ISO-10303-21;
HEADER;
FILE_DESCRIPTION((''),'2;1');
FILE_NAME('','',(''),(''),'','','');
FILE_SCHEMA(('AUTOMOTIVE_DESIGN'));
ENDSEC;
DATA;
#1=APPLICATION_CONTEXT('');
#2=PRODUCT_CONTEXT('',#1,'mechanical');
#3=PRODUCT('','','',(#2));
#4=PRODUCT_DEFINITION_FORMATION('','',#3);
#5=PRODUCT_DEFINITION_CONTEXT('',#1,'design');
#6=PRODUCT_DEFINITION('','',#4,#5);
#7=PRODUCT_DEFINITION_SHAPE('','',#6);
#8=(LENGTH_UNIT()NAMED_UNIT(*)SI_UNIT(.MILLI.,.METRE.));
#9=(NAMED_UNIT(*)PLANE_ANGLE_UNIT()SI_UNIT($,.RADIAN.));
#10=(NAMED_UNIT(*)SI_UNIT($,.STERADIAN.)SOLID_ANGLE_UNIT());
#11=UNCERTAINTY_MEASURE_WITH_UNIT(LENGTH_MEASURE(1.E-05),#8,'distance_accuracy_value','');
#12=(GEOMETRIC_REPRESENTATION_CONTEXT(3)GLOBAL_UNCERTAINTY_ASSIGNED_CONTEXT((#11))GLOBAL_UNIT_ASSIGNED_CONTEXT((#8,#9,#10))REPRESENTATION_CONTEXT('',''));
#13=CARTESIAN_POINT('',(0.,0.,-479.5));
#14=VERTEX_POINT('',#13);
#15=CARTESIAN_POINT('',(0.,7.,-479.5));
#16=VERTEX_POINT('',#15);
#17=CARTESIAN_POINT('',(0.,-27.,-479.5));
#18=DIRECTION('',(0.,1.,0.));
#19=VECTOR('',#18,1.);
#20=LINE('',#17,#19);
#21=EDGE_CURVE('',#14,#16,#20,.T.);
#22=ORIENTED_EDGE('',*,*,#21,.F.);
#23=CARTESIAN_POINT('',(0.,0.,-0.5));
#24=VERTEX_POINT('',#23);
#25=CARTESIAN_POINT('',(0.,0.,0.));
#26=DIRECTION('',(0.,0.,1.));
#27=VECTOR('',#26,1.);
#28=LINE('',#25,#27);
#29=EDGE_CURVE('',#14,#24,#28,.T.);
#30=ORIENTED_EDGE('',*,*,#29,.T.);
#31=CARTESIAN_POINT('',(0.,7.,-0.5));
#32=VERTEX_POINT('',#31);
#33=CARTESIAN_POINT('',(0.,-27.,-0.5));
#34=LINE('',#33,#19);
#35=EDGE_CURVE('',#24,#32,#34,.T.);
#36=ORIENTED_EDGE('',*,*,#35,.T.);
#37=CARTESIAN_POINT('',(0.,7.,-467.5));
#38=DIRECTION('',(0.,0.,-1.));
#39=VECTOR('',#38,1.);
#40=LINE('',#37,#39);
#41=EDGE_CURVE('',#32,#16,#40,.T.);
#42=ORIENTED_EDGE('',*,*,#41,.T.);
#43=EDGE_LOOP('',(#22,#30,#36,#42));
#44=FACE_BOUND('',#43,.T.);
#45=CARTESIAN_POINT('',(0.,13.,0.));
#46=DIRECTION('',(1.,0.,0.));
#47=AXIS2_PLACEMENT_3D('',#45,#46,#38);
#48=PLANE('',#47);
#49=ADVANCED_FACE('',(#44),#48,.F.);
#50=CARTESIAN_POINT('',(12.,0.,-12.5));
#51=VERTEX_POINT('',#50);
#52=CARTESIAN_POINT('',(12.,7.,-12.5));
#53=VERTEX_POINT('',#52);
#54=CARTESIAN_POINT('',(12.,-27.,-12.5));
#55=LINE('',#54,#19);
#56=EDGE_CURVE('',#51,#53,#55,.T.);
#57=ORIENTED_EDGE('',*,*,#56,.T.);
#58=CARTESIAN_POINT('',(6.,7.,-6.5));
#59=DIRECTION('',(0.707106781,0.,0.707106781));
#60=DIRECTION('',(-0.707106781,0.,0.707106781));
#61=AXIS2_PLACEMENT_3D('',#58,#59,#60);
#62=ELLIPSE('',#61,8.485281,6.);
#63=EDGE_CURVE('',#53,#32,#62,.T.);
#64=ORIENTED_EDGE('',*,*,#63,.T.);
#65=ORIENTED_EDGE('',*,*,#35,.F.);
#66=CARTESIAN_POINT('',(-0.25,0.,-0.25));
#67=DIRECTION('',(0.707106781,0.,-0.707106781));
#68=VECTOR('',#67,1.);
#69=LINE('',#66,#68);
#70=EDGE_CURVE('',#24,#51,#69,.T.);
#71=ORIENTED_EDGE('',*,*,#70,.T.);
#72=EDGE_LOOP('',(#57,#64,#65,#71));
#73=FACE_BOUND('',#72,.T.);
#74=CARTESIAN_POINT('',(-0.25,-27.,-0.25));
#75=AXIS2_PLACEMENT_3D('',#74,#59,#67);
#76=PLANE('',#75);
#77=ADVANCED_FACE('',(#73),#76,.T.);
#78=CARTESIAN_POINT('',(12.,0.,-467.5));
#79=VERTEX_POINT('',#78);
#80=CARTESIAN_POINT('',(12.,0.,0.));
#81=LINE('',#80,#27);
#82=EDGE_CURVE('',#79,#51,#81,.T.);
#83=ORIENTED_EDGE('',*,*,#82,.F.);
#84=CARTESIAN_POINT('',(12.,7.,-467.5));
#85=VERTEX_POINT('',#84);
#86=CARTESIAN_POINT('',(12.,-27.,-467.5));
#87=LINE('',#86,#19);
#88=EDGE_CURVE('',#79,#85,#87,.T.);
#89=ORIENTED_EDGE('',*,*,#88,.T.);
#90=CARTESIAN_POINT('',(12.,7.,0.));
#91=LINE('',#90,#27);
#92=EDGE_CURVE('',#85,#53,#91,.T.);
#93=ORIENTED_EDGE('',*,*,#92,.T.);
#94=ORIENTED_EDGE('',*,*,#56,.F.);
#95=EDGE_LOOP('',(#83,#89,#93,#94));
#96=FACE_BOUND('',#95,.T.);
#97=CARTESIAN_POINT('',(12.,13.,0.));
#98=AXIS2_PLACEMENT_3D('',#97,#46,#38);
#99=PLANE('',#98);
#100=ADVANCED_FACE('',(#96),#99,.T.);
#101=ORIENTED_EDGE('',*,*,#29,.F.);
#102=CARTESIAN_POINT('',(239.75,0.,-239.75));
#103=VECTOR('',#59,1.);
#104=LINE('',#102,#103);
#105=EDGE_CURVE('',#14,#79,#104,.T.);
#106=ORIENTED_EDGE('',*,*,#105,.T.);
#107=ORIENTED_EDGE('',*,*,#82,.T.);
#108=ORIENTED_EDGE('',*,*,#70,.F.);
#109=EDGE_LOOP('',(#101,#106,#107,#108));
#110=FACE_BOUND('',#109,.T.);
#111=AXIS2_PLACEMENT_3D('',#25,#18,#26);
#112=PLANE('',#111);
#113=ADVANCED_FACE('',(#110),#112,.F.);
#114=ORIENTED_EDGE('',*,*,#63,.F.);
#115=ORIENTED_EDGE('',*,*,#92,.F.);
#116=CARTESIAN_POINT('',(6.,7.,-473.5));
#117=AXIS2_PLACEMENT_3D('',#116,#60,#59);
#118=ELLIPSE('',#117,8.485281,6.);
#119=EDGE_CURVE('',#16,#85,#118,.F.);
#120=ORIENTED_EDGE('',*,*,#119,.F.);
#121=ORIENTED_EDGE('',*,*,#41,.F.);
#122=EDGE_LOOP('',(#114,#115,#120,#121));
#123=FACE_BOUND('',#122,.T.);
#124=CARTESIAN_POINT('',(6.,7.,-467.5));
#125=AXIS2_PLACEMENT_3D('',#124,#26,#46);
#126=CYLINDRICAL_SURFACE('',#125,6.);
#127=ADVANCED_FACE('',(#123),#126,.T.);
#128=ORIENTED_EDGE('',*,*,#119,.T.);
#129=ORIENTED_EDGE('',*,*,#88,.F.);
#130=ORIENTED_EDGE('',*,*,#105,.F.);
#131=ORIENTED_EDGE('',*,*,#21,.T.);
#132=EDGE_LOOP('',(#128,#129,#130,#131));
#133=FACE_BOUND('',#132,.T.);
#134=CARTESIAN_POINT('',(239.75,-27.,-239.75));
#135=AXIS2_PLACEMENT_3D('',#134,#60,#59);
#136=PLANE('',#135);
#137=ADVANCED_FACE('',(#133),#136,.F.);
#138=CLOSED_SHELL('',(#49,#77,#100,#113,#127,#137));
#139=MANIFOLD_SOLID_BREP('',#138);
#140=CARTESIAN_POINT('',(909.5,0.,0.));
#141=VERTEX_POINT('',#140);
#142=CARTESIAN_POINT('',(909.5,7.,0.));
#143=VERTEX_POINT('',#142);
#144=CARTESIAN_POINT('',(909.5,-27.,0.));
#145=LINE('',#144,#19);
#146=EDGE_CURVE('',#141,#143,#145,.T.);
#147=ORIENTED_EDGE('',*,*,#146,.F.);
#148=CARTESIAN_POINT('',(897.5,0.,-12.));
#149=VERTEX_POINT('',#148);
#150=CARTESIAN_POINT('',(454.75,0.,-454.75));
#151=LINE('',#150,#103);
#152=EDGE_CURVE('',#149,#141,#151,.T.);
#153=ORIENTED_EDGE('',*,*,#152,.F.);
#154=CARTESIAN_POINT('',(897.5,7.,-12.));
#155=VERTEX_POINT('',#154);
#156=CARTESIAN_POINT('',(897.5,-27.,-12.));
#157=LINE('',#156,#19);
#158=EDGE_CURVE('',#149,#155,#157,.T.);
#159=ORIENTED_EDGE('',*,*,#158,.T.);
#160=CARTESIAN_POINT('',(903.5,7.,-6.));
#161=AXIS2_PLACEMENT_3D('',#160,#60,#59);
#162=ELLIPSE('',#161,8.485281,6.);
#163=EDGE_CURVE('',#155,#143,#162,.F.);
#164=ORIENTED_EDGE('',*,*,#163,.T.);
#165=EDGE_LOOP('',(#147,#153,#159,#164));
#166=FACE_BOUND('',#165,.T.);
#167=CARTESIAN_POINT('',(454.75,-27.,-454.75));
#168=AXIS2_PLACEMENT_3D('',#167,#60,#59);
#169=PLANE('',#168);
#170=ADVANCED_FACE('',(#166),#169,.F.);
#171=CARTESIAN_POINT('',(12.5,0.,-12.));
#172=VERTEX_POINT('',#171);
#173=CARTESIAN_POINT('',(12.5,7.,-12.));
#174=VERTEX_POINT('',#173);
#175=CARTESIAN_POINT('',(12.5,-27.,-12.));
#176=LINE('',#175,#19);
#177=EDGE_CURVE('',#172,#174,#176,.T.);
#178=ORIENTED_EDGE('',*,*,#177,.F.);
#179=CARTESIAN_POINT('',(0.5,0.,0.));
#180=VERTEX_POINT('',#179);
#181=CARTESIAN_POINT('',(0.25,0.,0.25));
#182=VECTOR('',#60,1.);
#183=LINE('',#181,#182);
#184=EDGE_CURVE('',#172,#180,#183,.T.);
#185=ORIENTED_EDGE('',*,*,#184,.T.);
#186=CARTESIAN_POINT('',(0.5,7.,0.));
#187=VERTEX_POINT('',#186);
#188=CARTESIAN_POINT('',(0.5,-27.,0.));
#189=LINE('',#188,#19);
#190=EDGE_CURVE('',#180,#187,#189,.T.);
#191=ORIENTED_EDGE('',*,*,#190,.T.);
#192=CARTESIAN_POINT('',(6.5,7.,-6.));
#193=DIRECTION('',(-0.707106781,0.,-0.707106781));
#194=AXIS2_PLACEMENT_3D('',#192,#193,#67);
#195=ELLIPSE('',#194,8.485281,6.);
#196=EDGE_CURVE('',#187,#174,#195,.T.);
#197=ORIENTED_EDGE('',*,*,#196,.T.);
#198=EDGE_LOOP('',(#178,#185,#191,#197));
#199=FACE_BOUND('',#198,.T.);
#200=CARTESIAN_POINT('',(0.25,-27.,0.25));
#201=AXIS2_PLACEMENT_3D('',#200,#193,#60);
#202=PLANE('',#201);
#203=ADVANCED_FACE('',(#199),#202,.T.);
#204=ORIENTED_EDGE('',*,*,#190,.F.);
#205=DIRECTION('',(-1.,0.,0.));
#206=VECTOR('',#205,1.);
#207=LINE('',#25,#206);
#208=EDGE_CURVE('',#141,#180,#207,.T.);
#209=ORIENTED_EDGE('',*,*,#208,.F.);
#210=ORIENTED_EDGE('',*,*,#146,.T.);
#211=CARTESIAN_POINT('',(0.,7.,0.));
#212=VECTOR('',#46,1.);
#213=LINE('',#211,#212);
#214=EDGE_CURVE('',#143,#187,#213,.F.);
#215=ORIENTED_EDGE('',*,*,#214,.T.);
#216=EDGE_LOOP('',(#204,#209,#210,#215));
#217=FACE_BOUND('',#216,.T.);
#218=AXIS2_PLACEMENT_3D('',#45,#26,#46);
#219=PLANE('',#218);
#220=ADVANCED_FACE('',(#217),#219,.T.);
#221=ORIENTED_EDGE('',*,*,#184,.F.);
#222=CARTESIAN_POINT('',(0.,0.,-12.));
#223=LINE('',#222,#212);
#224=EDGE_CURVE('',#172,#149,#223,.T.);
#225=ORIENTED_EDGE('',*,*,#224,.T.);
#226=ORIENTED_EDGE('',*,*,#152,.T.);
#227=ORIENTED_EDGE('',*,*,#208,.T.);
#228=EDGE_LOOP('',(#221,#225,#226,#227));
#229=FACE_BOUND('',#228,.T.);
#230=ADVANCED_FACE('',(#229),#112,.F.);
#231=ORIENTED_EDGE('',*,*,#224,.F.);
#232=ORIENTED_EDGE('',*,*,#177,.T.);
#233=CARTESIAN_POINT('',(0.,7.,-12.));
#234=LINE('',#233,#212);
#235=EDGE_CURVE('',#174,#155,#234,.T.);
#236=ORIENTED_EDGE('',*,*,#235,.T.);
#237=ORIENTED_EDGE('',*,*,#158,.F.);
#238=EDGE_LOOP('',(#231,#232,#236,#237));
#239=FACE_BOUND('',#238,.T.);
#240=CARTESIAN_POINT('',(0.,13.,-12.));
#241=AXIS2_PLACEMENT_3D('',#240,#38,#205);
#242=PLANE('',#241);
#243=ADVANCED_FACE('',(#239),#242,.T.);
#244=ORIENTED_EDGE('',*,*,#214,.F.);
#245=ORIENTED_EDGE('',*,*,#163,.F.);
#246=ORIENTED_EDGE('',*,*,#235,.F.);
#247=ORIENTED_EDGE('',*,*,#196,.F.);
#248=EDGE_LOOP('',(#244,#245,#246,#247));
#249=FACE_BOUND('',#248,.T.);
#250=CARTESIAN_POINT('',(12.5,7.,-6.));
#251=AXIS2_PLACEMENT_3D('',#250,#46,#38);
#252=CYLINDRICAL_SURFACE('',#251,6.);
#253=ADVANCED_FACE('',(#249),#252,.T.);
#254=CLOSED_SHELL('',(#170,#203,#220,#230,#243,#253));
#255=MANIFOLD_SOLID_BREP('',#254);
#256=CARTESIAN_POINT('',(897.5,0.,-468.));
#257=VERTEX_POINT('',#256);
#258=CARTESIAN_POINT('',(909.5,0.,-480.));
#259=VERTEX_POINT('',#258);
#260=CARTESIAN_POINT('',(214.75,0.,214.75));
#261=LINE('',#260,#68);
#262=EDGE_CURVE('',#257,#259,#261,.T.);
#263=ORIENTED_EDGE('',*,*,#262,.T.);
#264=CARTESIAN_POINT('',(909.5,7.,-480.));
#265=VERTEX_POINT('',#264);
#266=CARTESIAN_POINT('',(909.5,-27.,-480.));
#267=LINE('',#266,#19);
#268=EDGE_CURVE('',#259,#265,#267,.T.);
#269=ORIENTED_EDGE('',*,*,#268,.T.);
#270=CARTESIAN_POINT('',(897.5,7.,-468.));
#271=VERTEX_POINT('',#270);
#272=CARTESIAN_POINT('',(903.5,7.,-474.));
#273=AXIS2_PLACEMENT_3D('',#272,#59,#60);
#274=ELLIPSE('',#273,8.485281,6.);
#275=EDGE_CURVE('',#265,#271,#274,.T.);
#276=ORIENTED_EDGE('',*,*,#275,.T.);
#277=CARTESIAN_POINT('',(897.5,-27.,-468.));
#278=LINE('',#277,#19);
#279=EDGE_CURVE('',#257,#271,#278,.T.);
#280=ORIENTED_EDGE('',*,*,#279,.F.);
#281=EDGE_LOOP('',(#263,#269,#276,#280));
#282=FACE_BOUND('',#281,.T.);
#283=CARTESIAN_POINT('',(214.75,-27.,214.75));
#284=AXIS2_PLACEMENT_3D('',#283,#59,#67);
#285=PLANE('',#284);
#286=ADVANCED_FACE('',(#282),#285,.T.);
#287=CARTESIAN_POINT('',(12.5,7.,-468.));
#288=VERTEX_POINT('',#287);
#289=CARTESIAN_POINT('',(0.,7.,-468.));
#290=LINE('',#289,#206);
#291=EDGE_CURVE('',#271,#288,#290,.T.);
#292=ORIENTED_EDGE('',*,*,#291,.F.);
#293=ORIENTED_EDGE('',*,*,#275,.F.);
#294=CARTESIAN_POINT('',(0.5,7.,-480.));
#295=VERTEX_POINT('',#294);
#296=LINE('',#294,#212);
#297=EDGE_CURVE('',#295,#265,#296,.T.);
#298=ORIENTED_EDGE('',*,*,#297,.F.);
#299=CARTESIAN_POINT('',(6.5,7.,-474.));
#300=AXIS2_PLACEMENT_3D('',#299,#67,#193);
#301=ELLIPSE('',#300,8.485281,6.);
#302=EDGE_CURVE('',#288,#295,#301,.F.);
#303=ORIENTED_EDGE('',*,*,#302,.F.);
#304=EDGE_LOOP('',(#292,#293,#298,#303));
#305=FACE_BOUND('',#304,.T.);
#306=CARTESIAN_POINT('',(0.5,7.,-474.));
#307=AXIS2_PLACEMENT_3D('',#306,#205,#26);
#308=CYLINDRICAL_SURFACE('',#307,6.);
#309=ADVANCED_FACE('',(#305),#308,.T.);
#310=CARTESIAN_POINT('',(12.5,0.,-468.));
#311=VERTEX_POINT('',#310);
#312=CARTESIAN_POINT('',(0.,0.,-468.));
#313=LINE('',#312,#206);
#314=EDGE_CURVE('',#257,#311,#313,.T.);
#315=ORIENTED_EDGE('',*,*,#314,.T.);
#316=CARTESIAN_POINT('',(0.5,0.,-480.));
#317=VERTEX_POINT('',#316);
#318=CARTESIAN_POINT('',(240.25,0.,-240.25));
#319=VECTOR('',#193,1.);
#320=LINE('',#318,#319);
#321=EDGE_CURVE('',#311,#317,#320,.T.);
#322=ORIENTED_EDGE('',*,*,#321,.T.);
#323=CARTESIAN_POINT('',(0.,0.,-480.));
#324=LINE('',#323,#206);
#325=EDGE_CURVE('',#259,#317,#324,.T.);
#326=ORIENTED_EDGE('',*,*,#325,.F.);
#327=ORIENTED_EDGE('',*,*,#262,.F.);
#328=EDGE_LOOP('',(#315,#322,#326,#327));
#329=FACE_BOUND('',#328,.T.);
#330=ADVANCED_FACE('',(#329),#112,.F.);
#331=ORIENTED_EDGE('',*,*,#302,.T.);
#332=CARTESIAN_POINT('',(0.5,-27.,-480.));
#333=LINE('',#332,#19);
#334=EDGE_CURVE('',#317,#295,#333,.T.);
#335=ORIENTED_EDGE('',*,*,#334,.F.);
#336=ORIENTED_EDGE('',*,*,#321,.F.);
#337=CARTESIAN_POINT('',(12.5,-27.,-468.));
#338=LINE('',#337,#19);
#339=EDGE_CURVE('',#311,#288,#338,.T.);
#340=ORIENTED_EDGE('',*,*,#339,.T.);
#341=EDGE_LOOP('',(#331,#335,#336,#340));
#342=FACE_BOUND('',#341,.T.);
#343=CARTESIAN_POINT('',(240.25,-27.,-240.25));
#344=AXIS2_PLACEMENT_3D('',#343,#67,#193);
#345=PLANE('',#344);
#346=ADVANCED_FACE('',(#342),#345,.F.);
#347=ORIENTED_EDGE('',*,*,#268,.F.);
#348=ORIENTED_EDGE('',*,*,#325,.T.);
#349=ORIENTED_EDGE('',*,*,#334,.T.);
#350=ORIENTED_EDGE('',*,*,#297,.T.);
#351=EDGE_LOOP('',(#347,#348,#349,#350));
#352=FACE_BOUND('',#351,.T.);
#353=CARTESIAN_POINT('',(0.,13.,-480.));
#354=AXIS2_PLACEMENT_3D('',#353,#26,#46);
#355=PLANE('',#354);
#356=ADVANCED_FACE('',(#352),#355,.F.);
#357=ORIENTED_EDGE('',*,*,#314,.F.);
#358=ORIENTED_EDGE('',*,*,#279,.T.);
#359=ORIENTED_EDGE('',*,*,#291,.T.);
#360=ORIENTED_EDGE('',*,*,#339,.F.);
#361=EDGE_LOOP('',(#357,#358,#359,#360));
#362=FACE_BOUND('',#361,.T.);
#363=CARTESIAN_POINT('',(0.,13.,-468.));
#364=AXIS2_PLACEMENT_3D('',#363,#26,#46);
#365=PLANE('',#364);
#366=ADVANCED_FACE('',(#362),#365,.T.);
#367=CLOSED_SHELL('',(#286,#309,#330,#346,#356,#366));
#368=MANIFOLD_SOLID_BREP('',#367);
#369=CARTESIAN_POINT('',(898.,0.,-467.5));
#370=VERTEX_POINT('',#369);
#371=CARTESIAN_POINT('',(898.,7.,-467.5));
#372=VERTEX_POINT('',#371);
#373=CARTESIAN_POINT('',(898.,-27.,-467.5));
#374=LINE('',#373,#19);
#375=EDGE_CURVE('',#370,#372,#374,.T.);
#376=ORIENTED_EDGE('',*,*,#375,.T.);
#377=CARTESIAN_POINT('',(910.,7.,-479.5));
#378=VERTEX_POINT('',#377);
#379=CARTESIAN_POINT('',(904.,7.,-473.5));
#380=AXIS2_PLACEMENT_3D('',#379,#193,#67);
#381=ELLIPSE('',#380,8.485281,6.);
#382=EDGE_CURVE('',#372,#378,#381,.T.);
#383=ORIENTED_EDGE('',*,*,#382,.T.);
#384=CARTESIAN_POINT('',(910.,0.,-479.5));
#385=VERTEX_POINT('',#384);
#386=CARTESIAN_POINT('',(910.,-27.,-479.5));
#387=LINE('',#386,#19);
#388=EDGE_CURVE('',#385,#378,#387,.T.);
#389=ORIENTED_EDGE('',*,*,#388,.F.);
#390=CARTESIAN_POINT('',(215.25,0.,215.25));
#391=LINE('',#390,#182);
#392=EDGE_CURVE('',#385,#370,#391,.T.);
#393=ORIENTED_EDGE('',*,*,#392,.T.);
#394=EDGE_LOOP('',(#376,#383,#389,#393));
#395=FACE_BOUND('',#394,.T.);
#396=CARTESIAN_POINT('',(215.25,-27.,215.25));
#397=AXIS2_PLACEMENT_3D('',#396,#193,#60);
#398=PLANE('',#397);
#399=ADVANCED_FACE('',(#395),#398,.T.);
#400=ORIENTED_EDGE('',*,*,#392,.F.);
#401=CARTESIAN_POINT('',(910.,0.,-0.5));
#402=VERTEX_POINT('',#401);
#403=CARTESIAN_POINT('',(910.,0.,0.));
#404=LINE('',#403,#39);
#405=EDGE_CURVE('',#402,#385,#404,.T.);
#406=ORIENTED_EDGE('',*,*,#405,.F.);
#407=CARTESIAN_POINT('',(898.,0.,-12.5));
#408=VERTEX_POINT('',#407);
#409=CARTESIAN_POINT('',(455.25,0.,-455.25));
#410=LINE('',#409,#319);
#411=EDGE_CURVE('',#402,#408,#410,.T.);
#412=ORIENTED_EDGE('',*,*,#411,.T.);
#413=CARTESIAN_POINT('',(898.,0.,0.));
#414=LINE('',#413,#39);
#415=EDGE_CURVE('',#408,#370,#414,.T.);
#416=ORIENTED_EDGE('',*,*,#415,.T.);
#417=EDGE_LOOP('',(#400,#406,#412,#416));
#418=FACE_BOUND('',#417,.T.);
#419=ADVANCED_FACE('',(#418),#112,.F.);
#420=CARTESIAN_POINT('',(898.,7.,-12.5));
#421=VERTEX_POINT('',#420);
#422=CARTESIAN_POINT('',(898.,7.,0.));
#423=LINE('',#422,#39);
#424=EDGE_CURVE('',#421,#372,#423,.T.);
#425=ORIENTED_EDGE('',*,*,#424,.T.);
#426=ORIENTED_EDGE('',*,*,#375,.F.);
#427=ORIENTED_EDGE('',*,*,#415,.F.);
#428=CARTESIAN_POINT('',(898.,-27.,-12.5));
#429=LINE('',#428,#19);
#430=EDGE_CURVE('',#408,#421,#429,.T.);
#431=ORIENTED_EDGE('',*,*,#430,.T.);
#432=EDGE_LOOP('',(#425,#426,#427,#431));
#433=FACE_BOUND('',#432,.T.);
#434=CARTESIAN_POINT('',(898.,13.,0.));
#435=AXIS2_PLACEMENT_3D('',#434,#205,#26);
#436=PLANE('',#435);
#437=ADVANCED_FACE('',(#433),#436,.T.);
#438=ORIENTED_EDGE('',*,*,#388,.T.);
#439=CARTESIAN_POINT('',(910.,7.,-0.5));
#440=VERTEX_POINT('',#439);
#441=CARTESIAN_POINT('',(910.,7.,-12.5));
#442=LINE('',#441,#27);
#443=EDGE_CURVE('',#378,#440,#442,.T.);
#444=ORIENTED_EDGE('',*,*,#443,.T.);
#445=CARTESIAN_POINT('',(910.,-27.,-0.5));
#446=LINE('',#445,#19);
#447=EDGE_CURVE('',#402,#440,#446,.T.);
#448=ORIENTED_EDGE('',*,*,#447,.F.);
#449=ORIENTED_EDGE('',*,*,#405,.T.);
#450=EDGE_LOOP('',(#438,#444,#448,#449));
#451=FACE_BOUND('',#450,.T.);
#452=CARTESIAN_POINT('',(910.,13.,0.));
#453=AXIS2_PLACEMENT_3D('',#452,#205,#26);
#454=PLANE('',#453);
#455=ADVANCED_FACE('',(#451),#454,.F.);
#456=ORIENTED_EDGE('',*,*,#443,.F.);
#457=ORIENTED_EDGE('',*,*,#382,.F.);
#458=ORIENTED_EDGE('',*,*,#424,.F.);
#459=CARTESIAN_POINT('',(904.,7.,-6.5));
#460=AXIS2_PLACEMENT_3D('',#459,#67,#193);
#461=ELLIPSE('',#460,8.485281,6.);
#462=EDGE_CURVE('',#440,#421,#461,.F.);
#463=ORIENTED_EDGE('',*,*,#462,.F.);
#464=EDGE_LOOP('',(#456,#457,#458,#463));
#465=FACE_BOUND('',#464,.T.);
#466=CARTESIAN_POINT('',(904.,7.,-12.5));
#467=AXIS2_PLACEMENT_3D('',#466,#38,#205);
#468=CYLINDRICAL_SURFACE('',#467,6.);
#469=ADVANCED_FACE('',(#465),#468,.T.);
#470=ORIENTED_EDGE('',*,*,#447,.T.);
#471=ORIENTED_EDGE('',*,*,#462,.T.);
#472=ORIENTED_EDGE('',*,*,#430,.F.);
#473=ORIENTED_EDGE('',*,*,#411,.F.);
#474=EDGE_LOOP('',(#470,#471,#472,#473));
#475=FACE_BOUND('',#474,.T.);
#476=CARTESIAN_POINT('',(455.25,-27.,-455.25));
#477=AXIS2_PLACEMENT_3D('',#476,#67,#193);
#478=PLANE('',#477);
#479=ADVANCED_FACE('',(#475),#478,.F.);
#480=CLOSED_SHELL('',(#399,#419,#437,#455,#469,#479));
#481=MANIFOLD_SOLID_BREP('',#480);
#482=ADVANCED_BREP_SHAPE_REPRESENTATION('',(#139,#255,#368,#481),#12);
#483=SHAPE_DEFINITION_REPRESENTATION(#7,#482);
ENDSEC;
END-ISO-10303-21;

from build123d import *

# Parameters (mm, degrees)
CROQUIS1_W              = 910
CROQUIS1_H              = 12
SALIENTE_EXTRUIR1_DEPTH = 13
CORTAR_EXTRUIR1_DEPTH   = 40
REDONDEO6_R             = 6
REDONDEO7_R             = 6
REDONDEO8_R             = 6
REDONDEO9_R             = 6


with BuildPart() as part:
    # Croquis1 → Saliente-Extruir1 (new body)
    with BuildSketch(Plane(origin=(0, 0, 0), x_dir=(1, 0, 0), z_dir=(0, 1, 0))):
        Polygon((0, 480), (0, 12), (12, 12), (12, 468), (898, 468), (898, 12), (910, 12), (910, 480), align=None)
        with Locations((455, 6)):
            Rectangle(CROQUIS1_W, CROQUIS1_H)
    extrude(amount=SALIENTE_EXTRUIR1_DEPTH)

    # Croquis2 → Cortar-Extruir1 (cut)
    with BuildSketch(Plane(origin=(0, 13, 0), x_dir=(1, 0, 0), z_dir=(0, 1, 0))):
        Polygon((12, 467.5), (12, 468), (0, 480), (0, 479.5), align=None)
        Polygon((0, 480), (12, 468), (12.5, 468), (0.5, 480), align=None)
        Polygon((12, 12), (12, 12.5), (0, 0.5), (0, 0), align=None)
        Polygon((12.5, 12), (12, 12), (0, 0), (0.5, 0), align=None)
        Polygon((910, 480), (898, 468), (898, 467.5), (910, 479.5), align=None)
        Polygon((909.5, 480), (897.5, 468), (898, 468), (910, 480), align=None)
        Polygon((910, 0.5), (898, 12.5), (898, 12), (910, 0), align=None)
        Polygon((898, 12), (897.5, 12), (909.5, 0), (910, 0), align=None)
    extrude(amount=-CORTAR_EXTRUIR1_DEPTH, mode=Mode.SUBTRACT)


with BuildPart() as cortar_extruir1_piece_1:
    # of the separate pieces the step leaves, piece 1, a body of its own (cortar_extruir1_pieces)
    add(part.part.solids().sort_by_distance((909.5, 0, -480))[0])

    # Redondeo6
    redondeo6_edges = [cortar_extruir1_piece_1.edges().sort_by_distance(p)[0] for p in [
        (455, 13, -480),
        (455, 13, -468),
    ]]
    fillet(redondeo6_edges, radius=REDONDEO6_R - 0.0001)  # a hair under: the kernel refuses the full size


with BuildPart() as cortar_extruir1_piece_2:
    # of the separate pieces the step leaves, piece 2, a body of its own (cortar_extruir1_pieces)
    add(part.part.solids().sort_by_distance((0.5, 0, 0))[0])

    # Redondeo8
    redondeo8_edges = [cortar_extruir1_piece_2.edges().sort_by_distance(p)[0] for p in [
        (455, 13, 0),
        (455, 13, -12),
    ]]
    fillet(redondeo8_edges, radius=REDONDEO8_R - 0.0001)  # a hair under: the kernel refuses the full size


with BuildPart() as cortar_extruir1_piece_3:
    # of the separate pieces the step leaves, piece 3, a body of its own (cortar_extruir1_pieces)
    add(part.part.solids().sort_by_distance((0, 0, -479.5))[0])

    # Redondeo7
    redondeo7_edges = [cortar_extruir1_piece_3.edges().sort_by_distance(p)[0] for p in [
        (0, 13, -240),
        (12, 13, -240),
    ]]
    fillet(redondeo7_edges, radius=REDONDEO7_R - 0.0001)  # a hair under: the kernel refuses the full size


with BuildPart() as cortar_extruir1_piece_4:
    # of the separate pieces the step leaves, piece 4, a body of its own (cortar_extruir1_pieces)
    add(part.part.solids().sort_by_distance((910, 0, -479.5))[0])

    # Redondeo9
    redondeo9_edges = [cortar_extruir1_piece_4.edges().sort_by_distance(p)[0] for p in [
        (910, 13, -240),
        (898, 13, -240),
    ]]
    fillet(redondeo9_edges, radius=REDONDEO9_R - 0.0001)  # a hair under: the kernel refuses the full size


solid = Compound([cortar_extruir1_piece_1.part, cortar_extruir1_piece_2.part, cortar_extruir1_piece_3.part, cortar_extruir1_piece_4.part])
